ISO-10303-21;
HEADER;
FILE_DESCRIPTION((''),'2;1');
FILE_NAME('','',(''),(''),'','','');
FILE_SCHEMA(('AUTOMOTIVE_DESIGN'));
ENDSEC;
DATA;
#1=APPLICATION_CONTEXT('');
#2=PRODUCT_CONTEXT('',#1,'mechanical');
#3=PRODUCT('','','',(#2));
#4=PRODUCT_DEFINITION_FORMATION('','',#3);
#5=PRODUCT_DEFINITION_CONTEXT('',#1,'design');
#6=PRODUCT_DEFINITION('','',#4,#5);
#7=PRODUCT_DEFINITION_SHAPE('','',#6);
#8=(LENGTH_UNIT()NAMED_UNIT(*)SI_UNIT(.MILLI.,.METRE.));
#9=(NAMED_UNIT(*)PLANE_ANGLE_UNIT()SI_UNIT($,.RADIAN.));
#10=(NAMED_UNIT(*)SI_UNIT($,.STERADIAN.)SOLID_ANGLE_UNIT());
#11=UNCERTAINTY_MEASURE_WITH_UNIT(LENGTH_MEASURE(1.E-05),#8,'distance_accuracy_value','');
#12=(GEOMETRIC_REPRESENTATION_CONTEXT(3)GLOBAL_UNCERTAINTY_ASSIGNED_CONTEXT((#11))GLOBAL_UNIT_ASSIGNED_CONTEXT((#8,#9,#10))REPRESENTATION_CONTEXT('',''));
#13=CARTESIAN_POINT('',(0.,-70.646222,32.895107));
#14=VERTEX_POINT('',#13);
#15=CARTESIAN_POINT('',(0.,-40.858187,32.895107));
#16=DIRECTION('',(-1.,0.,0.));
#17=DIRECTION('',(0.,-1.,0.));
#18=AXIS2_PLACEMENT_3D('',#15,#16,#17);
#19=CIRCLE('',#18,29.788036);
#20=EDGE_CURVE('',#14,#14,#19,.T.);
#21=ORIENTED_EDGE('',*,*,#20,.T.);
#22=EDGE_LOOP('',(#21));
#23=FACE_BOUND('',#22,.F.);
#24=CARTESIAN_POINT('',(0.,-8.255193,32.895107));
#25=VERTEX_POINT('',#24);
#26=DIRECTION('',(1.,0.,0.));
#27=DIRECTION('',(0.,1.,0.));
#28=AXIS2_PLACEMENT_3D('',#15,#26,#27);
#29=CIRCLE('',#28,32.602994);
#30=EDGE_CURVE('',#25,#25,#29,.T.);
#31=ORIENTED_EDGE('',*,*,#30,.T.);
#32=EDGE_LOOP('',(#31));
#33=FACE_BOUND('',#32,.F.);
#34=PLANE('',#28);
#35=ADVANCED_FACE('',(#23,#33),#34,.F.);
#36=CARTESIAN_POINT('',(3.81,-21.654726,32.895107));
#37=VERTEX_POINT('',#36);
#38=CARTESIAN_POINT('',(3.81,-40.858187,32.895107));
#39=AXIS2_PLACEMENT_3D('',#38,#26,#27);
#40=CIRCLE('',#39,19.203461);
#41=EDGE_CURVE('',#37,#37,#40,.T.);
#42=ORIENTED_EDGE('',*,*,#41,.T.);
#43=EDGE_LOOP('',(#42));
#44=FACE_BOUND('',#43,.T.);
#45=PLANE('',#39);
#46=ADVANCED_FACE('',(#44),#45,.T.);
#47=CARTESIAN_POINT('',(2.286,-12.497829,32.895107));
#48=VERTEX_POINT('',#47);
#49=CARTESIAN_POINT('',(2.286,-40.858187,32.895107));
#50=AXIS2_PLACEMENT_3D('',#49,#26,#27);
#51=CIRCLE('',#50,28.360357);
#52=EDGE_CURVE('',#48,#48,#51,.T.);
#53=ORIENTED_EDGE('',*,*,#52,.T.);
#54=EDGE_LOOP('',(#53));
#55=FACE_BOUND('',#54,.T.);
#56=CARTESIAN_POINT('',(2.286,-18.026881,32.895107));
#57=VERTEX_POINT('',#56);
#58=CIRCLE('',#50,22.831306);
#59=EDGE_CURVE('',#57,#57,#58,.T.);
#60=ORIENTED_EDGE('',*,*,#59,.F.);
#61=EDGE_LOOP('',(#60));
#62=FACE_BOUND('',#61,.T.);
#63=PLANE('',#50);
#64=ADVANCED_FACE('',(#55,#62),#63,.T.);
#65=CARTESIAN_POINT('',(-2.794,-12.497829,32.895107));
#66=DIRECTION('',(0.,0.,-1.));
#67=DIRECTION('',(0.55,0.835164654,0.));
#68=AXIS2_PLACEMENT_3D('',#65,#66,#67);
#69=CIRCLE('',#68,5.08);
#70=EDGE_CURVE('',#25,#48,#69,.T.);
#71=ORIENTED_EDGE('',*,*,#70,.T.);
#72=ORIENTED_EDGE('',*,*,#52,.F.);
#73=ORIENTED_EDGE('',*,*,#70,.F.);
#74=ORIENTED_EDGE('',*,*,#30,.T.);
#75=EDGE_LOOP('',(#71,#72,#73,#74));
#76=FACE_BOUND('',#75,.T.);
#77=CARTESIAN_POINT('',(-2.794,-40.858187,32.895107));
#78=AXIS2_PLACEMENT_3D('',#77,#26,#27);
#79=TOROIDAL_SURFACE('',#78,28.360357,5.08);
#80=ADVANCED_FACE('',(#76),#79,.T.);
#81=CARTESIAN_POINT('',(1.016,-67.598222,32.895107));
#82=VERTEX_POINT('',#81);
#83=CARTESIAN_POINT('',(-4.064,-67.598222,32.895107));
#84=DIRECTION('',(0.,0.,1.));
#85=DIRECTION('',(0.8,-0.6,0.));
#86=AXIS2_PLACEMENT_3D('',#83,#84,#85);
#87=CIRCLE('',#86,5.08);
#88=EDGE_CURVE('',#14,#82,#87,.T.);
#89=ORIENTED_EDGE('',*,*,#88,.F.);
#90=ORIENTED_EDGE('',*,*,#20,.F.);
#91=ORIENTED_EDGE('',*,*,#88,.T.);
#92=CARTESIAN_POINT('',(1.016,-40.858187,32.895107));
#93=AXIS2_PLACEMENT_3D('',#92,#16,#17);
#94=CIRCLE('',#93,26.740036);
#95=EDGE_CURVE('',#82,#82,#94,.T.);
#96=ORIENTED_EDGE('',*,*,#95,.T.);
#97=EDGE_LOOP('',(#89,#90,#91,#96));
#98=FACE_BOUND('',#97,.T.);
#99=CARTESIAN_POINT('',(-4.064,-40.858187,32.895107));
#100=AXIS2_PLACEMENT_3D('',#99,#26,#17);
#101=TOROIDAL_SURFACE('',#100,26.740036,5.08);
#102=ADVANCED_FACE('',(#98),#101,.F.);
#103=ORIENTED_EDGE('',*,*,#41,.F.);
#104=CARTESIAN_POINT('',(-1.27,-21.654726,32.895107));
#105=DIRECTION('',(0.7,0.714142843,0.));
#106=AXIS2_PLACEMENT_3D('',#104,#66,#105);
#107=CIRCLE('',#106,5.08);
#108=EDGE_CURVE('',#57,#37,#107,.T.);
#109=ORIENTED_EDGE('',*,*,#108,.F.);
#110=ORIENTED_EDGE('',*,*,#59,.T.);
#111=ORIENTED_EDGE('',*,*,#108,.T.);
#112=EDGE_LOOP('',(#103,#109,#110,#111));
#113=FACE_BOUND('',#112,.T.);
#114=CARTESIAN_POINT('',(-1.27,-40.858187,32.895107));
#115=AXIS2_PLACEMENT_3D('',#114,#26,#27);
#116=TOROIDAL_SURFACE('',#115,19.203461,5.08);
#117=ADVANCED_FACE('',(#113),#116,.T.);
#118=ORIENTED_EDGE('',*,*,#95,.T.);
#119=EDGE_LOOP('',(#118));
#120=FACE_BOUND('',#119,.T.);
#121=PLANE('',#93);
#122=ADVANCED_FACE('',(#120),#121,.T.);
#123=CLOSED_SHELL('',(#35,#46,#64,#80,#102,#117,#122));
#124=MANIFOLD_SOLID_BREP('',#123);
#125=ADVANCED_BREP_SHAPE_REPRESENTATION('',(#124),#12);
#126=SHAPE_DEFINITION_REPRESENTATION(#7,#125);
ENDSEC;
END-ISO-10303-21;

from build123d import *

# Parameters (mm, degrees)
F0_R     = 32.6029937505
F1_DEPTH = 2.286
F2_R     = 22.8313061555
F3_DEPTH = 1.524
F6_R     = 29.7880355639
F7_DEPTH = 1.016


# Not quite as in the source:
# - a fillet or chamfer that OpenCascade refuses, or shapes differently, is made with other operations: its cross-section is extruded or revolved along the edge and cut away or added


with BuildPart() as f1:
    # F0 (on Right) → F1 (new body)
    with BuildSketch(Plane.YZ):
        with Locations((-40.8581867814, 32.8951068223)):
            Circle(F0_R)
    extrude(amount=F1_DEPTH)

    # F2 (on face) → F3 (join)
    with BuildSketch(Plane.YZ.offset(2.286)):
        with Locations((-40.8581867814, 32.8951068223)):
            Circle(F2_R)
    extrude(amount=F3_DEPTH)

    # F4: fillet of radius 5.08 on 1 edges, made by hand

    # F4_s1 → F4_t2 (revolve, cut)
    with BuildSketch(Plane.XY.offset(32.8951068223)):
        with BuildLine():
            ThreePointArc((2.286, -18.0268806259), (3.4135285843, -19.6872507278), (3.81, -21.6547262676))
            Line((3.81, -21.6547262676), (3.81, -18.0268806259))
            Line((3.81, -18.0268806259), (2.286, -18.0268806259))
        make_face()
    revolve(axis=Axis((3.81, -40.8581867814, 32.8951068223), (1, 0, 0)), mode=Mode.SUBTRACT)

    # F5: fillet of radius 5.08 on 1 edges, made by hand

    # F5_s1 → F5_t2 (revolve, cut)
    with BuildSketch(Plane.XY.offset(32.8951068223)):
        with BuildLine():
            ThreePointArc((0, -8.2551930309), (1.6781314829, -10.0881738983), (2.286, -12.4978294754))
            Line((2.286, -12.4978294754), (2.286, -8.2551930309))
            Line((2.286, -8.2551930309), (0, -8.2551930309))
        make_face()
    revolve(axis=Axis((2.286, -40.8581867814, 32.8951068223), (1, 0, 0)), mode=Mode.SUBTRACT)

    # F6 (on face) → F7 (cut)
    with BuildSketch(Plane(origin=(0, 0, 0), x_dir=(0, -1, 0), z_dir=(-1, 0, 0))):
        with Locations((40.8581867814, 32.8951068223)):
            Circle(F6_R)
    extrude(amount=-F7_DEPTH, mode=Mode.SUBTRACT)

    # F8: fillet of radius 5.08 on 1 edges, made by hand

    # F8_s1 → F8_t2 (revolve)
    with BuildSketch(Plane.XY.offset(32.8951068223)):
        with BuildLine():
            ThreePointArc((0, -70.6462223453), (0.7553111541, -69.2046593967), (1.016, -67.5982223453))
            Line((1.016, -67.5982223453), (1.016, -70.6462223453))
            Line((1.016, -70.6462223453), (0, -70.6462223453))
        make_face()
    revolve(axis=Axis((1.016, -40.8581867814, 32.8951068223), (-1, 0, 0)))


solid = f1.part
